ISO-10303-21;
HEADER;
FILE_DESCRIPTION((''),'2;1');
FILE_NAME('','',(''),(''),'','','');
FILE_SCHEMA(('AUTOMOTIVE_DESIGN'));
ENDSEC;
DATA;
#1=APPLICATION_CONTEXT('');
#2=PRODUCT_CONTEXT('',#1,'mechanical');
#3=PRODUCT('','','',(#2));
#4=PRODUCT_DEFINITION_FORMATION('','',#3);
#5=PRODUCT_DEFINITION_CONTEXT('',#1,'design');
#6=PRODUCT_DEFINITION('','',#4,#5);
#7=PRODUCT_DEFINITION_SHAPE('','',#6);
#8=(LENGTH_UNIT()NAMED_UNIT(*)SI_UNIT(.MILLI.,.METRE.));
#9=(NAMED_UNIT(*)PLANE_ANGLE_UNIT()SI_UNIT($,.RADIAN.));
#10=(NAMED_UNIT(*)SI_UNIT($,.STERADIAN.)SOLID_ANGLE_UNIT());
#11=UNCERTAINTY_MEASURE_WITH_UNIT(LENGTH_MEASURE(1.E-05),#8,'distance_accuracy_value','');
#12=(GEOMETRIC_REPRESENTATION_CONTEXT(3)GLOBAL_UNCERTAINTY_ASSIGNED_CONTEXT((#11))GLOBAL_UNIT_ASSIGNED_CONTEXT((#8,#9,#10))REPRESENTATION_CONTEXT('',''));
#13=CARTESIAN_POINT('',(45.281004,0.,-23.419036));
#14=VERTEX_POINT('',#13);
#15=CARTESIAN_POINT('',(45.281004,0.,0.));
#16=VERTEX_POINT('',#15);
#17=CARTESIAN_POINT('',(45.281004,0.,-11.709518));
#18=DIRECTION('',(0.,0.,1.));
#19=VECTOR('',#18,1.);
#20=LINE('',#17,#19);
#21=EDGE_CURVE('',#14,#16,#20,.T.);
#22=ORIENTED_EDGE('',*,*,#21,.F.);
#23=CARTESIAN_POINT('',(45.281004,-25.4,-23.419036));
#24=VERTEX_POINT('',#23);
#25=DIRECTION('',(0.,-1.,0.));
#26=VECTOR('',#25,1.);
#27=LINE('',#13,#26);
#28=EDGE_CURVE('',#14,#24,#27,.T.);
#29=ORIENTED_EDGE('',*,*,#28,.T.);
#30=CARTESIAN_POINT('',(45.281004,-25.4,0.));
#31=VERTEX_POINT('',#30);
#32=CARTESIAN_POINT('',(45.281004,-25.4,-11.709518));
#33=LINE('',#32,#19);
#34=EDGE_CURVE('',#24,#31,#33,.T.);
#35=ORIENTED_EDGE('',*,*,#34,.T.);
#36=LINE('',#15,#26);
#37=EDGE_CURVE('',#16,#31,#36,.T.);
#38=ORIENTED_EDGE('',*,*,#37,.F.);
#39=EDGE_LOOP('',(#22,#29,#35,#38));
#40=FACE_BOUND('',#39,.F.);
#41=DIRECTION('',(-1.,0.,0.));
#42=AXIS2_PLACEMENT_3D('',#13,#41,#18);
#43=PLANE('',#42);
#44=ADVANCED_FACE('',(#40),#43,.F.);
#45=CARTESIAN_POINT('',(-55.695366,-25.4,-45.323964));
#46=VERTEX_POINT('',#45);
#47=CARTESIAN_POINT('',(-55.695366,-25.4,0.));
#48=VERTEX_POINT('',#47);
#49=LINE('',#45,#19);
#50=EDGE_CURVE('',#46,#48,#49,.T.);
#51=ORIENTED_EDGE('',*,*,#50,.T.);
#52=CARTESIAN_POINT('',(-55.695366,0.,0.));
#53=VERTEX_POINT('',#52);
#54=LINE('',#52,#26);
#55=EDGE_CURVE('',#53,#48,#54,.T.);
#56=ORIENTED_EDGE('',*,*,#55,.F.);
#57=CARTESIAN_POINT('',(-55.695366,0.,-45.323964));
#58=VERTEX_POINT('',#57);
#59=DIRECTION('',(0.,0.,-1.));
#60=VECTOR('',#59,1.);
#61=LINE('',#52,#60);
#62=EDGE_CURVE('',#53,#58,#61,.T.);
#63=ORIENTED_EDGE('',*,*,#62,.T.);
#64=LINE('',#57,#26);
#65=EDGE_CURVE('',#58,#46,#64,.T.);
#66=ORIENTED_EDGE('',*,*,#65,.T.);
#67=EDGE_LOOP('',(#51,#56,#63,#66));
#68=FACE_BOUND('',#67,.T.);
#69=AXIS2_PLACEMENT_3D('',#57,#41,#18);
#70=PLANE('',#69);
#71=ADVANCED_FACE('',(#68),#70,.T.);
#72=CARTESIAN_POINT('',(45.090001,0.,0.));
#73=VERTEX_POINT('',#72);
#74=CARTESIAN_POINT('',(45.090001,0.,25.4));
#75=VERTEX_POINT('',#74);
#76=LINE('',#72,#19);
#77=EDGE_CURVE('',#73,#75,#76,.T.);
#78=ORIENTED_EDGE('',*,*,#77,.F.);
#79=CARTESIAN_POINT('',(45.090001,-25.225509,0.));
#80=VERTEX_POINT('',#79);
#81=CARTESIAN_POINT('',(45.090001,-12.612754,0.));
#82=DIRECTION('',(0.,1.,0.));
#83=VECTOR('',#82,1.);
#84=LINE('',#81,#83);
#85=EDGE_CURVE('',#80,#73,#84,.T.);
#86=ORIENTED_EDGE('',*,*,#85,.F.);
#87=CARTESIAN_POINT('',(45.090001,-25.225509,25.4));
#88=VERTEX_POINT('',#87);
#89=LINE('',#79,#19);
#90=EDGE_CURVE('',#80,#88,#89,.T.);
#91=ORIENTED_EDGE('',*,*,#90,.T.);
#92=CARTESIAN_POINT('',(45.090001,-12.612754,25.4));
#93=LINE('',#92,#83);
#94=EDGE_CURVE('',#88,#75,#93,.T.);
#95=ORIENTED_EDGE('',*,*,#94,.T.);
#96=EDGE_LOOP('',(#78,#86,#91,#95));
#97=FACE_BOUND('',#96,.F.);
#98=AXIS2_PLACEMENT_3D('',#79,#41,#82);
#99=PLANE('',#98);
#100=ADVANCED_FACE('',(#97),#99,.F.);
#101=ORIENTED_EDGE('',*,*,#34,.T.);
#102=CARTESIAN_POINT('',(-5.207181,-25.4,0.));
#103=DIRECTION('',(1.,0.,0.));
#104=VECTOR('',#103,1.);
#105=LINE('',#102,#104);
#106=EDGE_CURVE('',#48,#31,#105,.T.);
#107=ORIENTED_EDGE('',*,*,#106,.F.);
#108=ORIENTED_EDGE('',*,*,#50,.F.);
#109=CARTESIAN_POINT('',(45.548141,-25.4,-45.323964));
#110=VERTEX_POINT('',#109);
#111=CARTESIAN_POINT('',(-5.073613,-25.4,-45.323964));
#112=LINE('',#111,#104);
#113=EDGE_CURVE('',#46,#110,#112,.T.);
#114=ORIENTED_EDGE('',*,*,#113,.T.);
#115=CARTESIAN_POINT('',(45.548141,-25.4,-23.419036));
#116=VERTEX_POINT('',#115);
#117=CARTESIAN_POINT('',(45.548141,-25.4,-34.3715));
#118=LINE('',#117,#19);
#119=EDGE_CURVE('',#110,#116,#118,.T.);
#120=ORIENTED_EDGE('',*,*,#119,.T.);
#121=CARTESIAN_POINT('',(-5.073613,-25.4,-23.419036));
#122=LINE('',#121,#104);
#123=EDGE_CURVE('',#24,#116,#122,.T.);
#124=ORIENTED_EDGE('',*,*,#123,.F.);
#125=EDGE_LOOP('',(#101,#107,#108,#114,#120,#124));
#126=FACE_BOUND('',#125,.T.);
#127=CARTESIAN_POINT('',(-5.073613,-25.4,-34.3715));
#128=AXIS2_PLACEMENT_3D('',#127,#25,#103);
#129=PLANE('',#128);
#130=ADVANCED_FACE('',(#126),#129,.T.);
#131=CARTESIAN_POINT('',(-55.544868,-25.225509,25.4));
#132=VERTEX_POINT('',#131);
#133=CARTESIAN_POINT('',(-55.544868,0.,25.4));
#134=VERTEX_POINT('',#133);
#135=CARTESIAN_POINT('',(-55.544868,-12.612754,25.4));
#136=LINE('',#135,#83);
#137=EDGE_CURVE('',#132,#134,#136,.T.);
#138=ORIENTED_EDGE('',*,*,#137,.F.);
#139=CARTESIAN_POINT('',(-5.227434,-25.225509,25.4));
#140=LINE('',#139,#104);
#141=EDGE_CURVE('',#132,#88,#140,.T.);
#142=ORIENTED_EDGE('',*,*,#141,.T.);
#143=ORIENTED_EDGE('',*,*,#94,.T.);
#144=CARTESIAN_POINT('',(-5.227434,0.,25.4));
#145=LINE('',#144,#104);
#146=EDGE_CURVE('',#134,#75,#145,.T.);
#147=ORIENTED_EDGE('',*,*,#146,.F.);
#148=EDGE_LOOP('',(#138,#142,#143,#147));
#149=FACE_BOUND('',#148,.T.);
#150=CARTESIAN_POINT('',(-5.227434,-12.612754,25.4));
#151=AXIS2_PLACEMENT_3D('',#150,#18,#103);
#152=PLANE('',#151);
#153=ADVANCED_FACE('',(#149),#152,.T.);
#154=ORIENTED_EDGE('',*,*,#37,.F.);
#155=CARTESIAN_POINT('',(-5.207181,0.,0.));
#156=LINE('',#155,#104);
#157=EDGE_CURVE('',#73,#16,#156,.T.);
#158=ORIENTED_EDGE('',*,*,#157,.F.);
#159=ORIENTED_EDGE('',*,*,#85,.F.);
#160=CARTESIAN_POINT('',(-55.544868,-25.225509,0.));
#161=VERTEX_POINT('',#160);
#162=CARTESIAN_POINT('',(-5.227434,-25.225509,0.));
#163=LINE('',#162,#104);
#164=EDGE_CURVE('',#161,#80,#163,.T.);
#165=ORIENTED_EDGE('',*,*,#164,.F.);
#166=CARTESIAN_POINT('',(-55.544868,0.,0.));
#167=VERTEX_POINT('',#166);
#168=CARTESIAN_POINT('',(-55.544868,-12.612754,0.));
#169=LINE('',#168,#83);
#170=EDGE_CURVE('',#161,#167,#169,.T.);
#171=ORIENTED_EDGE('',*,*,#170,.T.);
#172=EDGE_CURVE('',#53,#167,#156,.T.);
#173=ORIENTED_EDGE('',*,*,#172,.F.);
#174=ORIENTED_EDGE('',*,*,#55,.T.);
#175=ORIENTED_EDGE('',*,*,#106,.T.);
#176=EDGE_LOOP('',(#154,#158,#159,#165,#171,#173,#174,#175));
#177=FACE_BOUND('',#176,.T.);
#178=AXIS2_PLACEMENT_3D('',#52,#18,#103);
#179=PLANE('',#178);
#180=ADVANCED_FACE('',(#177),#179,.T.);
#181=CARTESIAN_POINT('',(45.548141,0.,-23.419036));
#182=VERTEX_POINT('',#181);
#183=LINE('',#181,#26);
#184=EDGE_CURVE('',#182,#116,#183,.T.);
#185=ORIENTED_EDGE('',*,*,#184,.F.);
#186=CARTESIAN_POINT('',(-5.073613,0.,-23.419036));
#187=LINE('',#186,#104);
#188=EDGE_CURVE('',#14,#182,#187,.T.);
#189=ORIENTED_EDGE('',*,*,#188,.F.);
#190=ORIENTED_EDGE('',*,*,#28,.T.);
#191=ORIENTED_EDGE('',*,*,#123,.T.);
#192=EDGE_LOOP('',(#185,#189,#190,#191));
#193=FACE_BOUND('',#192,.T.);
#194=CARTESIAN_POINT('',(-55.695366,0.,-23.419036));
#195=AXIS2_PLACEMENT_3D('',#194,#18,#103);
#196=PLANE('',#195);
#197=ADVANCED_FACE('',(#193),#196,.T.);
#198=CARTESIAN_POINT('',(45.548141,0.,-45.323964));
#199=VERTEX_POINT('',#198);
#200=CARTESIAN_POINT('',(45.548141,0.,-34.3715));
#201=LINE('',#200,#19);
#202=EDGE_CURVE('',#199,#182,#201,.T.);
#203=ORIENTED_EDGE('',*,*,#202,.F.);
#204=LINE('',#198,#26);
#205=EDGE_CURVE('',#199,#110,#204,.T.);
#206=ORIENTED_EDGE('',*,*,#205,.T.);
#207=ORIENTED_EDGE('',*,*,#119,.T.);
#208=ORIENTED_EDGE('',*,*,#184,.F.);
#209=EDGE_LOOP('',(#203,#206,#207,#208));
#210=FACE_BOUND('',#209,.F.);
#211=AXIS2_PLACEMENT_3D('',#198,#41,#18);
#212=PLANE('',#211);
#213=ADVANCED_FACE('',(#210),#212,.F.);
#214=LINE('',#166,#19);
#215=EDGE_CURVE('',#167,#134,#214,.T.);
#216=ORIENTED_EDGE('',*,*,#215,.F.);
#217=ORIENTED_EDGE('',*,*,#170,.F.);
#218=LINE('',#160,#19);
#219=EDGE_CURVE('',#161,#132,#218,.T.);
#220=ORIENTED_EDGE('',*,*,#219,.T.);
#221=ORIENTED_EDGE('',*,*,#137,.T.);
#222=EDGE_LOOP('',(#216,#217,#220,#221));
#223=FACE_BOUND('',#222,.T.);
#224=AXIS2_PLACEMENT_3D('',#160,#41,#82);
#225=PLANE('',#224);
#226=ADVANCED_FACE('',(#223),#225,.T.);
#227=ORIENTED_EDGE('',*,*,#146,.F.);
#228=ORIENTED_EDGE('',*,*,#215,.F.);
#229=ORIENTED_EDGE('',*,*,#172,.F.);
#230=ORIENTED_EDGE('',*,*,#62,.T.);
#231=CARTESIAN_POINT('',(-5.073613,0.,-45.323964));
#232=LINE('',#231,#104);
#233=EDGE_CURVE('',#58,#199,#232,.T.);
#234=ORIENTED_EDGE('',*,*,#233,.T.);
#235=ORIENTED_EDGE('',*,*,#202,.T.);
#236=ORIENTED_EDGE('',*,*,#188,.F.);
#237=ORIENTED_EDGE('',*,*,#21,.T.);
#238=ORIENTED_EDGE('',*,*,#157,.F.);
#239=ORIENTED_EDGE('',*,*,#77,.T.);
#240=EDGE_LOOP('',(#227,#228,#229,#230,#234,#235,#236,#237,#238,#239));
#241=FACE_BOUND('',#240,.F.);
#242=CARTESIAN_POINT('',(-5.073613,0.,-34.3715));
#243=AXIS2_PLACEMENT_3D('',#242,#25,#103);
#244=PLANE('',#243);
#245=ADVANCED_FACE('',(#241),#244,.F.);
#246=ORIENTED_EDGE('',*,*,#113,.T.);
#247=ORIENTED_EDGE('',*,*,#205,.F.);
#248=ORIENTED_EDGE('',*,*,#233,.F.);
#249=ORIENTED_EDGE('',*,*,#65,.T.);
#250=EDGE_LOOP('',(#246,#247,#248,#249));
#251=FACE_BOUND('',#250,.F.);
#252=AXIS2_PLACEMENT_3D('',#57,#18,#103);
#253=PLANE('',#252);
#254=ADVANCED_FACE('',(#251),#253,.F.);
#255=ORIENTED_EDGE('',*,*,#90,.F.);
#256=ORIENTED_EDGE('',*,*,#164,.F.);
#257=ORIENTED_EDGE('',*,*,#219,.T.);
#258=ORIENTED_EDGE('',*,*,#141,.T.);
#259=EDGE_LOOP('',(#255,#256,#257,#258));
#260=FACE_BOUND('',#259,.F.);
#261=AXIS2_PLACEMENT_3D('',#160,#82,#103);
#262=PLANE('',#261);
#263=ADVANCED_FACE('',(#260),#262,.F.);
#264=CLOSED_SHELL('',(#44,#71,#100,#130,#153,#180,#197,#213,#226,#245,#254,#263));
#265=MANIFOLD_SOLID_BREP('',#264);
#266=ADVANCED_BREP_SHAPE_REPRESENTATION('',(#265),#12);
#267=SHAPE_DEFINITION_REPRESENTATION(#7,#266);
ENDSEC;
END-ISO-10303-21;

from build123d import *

# Parameters (mm, degrees)
F2_W     = 100.6348691881
F2_H     = 25.2255089581
F3_DEPTH = 25.4
F4_W     = 100.976370275
F4_H     = 23.4190355986
F5_DEPTH = 25.4
F8_W     = 101.243507117
F8_H     = 21.9049286097
F9_DEPTH = 25.4


# Not quite as in the source:
# - the program builds the solid bodies; features that only make, move or delete a surface that nothing else refers to are left out


with BuildPart() as f3:
    # F2 (on Top) → F3 (new body)
    with BuildSketch(Plane.XY):
        with Locations((-5.2274335176, -12.6127544791)):
            Rectangle(F2_W, F2_H)
    extrude(amount=F3_DEPTH)

    # F4 (on Front) → F5 (join)
    with BuildSketch(Plane.XZ):
        with Locations((-5.2071809769, -11.7095177993)):
            Rectangle(F4_W, F4_H)
    extrude(amount=F5_DEPTH)

    # F8 (on Front) → F9 (join)
    with BuildSketch(Plane.XZ):
        with Locations((-5.0736125559, -34.3714999035)):
            Rectangle(F8_W, F8_H)
    extrude(amount=F9_DEPTH)


solid = f3.part
